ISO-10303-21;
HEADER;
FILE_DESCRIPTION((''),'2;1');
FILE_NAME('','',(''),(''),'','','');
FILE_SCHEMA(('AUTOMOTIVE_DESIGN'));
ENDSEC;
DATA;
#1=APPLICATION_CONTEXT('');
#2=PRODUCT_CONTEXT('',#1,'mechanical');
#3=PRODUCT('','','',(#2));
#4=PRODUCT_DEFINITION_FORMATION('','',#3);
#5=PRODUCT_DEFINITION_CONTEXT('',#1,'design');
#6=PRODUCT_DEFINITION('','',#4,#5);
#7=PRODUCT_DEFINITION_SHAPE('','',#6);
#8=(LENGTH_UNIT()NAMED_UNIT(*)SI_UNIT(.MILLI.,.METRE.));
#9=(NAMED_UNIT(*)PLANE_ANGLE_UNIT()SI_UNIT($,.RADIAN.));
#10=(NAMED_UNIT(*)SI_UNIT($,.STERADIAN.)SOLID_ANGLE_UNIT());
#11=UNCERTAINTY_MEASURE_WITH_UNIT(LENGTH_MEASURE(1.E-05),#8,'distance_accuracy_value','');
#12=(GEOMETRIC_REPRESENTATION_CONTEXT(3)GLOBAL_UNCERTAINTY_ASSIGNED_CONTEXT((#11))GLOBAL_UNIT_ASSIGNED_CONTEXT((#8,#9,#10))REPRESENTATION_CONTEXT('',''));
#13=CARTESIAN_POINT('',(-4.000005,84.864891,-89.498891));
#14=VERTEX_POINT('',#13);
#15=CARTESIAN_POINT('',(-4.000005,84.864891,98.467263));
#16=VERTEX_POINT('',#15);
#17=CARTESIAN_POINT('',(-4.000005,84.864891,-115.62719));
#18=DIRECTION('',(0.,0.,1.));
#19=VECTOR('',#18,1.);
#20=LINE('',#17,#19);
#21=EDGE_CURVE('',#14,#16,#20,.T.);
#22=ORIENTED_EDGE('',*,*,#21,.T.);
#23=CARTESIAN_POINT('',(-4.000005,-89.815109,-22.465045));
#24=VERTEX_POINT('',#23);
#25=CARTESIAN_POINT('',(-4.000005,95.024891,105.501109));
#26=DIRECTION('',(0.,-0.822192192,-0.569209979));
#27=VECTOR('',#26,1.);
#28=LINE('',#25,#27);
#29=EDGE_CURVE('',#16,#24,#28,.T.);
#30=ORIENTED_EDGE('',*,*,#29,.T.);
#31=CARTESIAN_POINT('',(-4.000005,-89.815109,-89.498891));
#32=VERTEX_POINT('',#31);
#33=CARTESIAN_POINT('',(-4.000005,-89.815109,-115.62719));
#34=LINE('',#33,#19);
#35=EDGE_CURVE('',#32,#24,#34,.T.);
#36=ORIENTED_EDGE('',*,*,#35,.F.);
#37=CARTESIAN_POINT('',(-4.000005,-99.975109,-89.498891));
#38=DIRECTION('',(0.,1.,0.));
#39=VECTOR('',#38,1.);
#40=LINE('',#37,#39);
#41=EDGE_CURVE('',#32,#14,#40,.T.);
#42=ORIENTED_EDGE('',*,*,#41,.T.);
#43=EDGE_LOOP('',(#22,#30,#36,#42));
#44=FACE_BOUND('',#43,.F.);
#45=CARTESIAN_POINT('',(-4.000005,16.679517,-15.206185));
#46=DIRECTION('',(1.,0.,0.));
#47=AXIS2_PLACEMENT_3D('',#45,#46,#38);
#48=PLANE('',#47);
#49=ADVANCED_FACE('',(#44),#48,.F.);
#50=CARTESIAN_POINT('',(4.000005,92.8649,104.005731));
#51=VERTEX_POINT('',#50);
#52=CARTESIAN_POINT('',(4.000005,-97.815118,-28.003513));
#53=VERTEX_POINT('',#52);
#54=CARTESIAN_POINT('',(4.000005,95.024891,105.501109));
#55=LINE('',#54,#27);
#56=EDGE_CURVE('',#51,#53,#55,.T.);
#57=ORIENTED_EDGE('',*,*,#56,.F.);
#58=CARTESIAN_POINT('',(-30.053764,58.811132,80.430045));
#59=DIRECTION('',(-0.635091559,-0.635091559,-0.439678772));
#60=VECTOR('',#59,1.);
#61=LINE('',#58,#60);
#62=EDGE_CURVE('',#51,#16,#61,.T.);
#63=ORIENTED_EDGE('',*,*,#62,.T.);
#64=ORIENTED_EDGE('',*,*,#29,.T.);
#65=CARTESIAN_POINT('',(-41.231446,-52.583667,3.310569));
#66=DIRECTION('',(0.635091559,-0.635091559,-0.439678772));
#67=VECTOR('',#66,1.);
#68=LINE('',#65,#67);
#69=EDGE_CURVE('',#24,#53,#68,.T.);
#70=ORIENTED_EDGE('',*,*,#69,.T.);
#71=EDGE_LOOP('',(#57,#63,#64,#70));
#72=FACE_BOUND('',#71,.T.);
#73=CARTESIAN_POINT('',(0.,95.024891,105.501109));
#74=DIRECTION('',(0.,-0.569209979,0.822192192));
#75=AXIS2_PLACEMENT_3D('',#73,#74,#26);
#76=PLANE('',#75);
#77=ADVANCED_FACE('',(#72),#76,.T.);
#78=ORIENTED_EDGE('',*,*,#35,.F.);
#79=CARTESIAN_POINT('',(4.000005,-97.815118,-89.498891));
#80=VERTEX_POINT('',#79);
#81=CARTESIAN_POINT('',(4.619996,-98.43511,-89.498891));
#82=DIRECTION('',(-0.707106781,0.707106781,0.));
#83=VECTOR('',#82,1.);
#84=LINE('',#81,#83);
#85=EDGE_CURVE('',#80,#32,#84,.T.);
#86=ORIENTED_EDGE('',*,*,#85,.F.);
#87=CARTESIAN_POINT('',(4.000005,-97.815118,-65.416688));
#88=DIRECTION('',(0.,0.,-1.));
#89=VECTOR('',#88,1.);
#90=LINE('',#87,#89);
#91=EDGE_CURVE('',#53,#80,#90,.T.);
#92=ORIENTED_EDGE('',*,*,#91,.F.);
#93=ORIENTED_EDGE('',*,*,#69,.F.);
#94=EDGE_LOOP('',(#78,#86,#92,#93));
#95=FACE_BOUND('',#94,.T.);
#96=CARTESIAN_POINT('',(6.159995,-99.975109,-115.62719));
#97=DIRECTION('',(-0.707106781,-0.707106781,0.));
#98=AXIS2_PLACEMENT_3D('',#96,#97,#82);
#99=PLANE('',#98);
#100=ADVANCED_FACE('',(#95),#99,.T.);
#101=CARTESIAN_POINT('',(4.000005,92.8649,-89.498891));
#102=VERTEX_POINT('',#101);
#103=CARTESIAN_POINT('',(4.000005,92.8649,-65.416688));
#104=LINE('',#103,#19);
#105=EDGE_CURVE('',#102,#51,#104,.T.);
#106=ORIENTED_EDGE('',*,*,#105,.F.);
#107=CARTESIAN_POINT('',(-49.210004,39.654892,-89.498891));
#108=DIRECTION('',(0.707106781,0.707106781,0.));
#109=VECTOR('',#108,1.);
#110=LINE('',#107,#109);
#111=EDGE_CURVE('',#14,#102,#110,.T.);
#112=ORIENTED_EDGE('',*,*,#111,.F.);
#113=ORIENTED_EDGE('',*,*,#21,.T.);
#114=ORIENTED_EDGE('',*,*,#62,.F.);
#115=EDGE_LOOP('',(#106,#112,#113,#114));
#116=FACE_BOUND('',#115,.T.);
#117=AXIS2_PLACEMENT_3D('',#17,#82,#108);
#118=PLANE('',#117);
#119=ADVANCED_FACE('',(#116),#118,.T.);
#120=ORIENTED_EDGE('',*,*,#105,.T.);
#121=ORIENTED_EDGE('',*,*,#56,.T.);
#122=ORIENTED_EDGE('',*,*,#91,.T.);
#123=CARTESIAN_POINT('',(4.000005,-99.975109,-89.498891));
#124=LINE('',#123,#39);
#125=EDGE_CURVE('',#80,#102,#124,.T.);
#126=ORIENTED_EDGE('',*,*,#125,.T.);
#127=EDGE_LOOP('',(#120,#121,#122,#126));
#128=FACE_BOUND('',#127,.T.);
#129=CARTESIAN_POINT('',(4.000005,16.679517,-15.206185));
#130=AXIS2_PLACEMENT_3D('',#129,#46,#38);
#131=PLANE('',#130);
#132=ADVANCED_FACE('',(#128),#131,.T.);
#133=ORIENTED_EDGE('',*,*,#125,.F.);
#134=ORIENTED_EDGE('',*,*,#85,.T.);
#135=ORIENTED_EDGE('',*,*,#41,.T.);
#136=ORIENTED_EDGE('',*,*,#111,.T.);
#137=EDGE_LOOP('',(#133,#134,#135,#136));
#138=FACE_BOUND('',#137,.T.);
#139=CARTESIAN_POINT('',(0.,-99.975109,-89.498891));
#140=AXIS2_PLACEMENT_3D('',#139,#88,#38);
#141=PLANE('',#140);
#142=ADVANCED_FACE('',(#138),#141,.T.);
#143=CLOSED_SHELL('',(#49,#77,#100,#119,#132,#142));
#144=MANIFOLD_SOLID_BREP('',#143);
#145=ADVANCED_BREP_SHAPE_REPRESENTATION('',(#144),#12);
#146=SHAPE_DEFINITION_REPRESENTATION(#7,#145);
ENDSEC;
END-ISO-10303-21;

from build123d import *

# Parameters (mm, degrees)
F1_DEPTH    = 4.0000047
F2_T1_DEPTH = 112.2565983155
F3_T1_DEPTH = 247.2565983155


# Not quite as in the source:
# - a fillet or chamfer that OpenCascade refuses, or shapes differently, is made with other operations: its cross-section is extruded or revolved along the edge and cut away or added


with BuildPart() as f1:
    # F0 (on Right) → F1 (new body, symmetric)
    with BuildSketch(Plane.YZ):
        Polygon((-99.9751089393, -29.498891169), (-99.9751089393, -89.4988911689), (95.0248910607, -89.4988911689), (95.0248910607, 105.5011088311), align=None)
    extrude(amount=F1_DEPTH, both=True)

    # F2: chamfer of 10.16 on 1 edges, made by hand

    # F2_s2 → F2_t1 (cut)
    with BuildSketch(Plane.XY.offset(-115.6271903267)):
        Polygon((6.1599953, -99.9751089393), (-4.0000047, -89.8151089393), (-4.0000047, -99.9751089393), align=None)
    extrude(amount=F2_T1_DEPTH, mode=Mode.SUBTRACT)

    # F3: chamfer of 10.16 on 1 edges, made by hand

    # F3_s2 → F3_t1 (cut)
    with BuildSketch(Plane.XY.offset(-115.6271903267)):
        Polygon((-4.0000047, 84.8648910607), (6.1599953, 95.0248910607), (-4.0000047, 95.0248910607), align=None)
    extrude(amount=F3_T1_DEPTH, mode=Mode.SUBTRACT)


solid = f1.part
